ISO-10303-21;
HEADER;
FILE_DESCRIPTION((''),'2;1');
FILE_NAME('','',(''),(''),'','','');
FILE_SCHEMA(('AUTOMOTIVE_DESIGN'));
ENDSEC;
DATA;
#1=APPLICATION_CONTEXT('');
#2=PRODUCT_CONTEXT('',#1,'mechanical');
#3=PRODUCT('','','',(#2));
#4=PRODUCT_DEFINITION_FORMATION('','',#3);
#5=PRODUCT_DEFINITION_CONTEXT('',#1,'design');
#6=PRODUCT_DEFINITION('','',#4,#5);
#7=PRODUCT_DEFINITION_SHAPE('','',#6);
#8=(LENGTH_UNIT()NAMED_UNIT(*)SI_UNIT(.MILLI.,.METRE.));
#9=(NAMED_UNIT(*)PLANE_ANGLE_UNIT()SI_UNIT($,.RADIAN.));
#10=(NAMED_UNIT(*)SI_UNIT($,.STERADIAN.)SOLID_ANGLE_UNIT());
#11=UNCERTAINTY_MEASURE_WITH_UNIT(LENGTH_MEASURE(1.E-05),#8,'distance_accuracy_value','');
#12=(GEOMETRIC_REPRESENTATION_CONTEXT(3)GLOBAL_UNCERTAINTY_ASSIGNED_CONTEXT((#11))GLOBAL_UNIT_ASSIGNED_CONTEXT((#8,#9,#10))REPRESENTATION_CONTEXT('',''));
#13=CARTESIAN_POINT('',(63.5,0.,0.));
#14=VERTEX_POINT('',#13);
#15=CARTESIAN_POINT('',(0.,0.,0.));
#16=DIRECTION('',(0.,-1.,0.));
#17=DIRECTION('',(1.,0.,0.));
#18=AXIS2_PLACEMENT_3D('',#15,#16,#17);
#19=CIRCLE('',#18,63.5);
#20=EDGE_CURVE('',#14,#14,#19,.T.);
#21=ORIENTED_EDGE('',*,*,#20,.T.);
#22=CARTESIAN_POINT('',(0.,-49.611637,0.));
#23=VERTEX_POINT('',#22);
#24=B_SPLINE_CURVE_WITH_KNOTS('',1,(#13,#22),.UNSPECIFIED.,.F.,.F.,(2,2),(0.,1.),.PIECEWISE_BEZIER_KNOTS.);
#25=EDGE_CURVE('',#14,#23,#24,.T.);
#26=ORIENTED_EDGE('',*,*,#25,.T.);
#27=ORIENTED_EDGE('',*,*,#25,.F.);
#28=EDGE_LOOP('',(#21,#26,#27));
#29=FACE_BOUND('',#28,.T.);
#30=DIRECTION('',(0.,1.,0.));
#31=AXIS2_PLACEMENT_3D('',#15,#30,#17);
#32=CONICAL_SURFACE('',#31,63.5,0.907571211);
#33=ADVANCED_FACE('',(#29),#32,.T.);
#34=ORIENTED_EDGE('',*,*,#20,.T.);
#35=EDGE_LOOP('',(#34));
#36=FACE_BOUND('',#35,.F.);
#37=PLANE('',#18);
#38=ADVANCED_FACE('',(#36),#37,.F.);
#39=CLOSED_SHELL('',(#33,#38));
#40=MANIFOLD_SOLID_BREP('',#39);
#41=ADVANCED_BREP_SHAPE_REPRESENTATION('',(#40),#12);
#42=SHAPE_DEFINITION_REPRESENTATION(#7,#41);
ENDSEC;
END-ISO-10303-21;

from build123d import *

# Parameters (mm, degrees)
F0_R = 63.5


# Not quite as in the source:
# - an extrude whose draft closes it to a point is written as a loft to that point


with BuildPart() as f1:
    # F0 (on Front) → F1 section 0
    with BuildSketch(Plane.XZ, mode=Mode.PRIVATE) as f1_s0:
        Circle(F0_R)
    loft([f1_s0.sketch, Vertex(0, -49.6116372832, 0)], ruled=True)


solid = f1.part
